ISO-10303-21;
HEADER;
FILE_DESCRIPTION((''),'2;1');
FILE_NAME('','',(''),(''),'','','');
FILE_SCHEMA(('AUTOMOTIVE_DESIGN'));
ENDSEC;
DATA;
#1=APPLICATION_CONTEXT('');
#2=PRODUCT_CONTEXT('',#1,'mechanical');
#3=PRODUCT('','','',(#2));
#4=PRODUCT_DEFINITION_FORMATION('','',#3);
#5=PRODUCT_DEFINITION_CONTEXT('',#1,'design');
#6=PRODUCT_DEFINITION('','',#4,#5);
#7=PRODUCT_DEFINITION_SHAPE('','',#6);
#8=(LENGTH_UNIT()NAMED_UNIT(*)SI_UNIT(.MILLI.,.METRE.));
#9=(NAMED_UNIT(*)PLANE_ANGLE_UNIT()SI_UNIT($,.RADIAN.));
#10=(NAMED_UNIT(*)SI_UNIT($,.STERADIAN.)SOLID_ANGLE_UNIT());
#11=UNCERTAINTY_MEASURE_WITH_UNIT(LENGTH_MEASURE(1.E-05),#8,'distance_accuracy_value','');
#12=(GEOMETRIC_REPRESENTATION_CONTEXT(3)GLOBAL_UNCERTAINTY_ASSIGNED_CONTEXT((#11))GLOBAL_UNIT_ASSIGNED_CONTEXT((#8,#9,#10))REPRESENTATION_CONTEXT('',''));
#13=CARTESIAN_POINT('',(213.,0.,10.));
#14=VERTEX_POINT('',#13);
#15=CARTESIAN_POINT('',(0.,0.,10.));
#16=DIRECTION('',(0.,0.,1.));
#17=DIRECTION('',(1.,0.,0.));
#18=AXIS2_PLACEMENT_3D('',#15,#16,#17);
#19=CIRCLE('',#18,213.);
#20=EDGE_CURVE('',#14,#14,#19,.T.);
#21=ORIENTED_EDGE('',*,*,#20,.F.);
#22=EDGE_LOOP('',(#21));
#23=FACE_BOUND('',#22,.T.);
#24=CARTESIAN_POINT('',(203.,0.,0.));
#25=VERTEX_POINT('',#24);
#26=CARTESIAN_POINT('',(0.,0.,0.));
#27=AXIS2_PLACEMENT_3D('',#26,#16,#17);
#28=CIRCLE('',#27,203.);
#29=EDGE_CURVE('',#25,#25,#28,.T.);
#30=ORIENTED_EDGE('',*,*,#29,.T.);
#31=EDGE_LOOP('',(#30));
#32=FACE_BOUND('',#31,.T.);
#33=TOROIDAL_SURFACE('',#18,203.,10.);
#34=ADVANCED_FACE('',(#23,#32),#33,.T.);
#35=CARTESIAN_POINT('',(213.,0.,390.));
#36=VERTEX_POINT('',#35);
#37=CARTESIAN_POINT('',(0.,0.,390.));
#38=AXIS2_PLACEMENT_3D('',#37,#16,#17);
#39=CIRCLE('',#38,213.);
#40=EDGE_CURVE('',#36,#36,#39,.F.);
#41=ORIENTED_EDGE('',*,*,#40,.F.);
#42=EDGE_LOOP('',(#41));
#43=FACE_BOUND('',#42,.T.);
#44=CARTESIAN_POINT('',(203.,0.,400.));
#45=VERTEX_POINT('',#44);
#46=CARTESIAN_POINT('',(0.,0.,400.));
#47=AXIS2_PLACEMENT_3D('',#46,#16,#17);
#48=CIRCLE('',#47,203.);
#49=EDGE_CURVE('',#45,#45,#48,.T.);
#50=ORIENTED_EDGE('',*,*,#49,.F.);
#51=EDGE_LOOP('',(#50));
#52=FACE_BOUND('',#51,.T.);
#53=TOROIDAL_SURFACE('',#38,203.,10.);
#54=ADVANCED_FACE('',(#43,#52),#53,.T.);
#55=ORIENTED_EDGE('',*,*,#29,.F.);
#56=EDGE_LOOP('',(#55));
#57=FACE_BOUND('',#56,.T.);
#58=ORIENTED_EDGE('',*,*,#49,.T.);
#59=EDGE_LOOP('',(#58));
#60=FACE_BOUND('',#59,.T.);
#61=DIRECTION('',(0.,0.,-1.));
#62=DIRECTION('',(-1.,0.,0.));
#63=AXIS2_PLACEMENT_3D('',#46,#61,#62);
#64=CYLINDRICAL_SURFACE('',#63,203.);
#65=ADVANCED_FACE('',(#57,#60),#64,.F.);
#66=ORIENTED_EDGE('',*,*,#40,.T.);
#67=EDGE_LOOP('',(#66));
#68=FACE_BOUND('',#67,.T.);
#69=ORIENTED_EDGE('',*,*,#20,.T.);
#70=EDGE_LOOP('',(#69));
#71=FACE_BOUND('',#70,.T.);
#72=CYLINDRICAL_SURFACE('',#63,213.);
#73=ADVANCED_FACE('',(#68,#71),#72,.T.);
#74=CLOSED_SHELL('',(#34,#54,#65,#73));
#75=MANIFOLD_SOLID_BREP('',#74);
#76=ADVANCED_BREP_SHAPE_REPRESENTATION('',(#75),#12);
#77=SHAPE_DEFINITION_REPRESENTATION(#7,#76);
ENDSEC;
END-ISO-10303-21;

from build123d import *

# Parameters (mm, degrees)
SKETCH1_R           = 213
SKETCH1_R_2         = 203
EXTRUDE_THIN1_DEPTH = 400
FILLET1_R           = 10


with BuildPart() as part:
    # Sketch1 → Extrude-Thin1 (new body)
    with BuildSketch(Plane.XY):
        Circle(SKETCH1_R)
        Circle(SKETCH1_R_2, mode=Mode.SUBTRACT)
    extrude(amount=EXTRUDE_THIN1_DEPTH)

    # Fillet1
    fillet1_edges = [part.edges().sort_by_distance(p)[0] for p in [
        (-213, 0, 0),
        (-213, 0, 400),
    ]]
    fillet(fillet1_edges, radius=FILLET1_R - 0.0001)  # a hair under: the kernel refuses the full size


solid = part.part
